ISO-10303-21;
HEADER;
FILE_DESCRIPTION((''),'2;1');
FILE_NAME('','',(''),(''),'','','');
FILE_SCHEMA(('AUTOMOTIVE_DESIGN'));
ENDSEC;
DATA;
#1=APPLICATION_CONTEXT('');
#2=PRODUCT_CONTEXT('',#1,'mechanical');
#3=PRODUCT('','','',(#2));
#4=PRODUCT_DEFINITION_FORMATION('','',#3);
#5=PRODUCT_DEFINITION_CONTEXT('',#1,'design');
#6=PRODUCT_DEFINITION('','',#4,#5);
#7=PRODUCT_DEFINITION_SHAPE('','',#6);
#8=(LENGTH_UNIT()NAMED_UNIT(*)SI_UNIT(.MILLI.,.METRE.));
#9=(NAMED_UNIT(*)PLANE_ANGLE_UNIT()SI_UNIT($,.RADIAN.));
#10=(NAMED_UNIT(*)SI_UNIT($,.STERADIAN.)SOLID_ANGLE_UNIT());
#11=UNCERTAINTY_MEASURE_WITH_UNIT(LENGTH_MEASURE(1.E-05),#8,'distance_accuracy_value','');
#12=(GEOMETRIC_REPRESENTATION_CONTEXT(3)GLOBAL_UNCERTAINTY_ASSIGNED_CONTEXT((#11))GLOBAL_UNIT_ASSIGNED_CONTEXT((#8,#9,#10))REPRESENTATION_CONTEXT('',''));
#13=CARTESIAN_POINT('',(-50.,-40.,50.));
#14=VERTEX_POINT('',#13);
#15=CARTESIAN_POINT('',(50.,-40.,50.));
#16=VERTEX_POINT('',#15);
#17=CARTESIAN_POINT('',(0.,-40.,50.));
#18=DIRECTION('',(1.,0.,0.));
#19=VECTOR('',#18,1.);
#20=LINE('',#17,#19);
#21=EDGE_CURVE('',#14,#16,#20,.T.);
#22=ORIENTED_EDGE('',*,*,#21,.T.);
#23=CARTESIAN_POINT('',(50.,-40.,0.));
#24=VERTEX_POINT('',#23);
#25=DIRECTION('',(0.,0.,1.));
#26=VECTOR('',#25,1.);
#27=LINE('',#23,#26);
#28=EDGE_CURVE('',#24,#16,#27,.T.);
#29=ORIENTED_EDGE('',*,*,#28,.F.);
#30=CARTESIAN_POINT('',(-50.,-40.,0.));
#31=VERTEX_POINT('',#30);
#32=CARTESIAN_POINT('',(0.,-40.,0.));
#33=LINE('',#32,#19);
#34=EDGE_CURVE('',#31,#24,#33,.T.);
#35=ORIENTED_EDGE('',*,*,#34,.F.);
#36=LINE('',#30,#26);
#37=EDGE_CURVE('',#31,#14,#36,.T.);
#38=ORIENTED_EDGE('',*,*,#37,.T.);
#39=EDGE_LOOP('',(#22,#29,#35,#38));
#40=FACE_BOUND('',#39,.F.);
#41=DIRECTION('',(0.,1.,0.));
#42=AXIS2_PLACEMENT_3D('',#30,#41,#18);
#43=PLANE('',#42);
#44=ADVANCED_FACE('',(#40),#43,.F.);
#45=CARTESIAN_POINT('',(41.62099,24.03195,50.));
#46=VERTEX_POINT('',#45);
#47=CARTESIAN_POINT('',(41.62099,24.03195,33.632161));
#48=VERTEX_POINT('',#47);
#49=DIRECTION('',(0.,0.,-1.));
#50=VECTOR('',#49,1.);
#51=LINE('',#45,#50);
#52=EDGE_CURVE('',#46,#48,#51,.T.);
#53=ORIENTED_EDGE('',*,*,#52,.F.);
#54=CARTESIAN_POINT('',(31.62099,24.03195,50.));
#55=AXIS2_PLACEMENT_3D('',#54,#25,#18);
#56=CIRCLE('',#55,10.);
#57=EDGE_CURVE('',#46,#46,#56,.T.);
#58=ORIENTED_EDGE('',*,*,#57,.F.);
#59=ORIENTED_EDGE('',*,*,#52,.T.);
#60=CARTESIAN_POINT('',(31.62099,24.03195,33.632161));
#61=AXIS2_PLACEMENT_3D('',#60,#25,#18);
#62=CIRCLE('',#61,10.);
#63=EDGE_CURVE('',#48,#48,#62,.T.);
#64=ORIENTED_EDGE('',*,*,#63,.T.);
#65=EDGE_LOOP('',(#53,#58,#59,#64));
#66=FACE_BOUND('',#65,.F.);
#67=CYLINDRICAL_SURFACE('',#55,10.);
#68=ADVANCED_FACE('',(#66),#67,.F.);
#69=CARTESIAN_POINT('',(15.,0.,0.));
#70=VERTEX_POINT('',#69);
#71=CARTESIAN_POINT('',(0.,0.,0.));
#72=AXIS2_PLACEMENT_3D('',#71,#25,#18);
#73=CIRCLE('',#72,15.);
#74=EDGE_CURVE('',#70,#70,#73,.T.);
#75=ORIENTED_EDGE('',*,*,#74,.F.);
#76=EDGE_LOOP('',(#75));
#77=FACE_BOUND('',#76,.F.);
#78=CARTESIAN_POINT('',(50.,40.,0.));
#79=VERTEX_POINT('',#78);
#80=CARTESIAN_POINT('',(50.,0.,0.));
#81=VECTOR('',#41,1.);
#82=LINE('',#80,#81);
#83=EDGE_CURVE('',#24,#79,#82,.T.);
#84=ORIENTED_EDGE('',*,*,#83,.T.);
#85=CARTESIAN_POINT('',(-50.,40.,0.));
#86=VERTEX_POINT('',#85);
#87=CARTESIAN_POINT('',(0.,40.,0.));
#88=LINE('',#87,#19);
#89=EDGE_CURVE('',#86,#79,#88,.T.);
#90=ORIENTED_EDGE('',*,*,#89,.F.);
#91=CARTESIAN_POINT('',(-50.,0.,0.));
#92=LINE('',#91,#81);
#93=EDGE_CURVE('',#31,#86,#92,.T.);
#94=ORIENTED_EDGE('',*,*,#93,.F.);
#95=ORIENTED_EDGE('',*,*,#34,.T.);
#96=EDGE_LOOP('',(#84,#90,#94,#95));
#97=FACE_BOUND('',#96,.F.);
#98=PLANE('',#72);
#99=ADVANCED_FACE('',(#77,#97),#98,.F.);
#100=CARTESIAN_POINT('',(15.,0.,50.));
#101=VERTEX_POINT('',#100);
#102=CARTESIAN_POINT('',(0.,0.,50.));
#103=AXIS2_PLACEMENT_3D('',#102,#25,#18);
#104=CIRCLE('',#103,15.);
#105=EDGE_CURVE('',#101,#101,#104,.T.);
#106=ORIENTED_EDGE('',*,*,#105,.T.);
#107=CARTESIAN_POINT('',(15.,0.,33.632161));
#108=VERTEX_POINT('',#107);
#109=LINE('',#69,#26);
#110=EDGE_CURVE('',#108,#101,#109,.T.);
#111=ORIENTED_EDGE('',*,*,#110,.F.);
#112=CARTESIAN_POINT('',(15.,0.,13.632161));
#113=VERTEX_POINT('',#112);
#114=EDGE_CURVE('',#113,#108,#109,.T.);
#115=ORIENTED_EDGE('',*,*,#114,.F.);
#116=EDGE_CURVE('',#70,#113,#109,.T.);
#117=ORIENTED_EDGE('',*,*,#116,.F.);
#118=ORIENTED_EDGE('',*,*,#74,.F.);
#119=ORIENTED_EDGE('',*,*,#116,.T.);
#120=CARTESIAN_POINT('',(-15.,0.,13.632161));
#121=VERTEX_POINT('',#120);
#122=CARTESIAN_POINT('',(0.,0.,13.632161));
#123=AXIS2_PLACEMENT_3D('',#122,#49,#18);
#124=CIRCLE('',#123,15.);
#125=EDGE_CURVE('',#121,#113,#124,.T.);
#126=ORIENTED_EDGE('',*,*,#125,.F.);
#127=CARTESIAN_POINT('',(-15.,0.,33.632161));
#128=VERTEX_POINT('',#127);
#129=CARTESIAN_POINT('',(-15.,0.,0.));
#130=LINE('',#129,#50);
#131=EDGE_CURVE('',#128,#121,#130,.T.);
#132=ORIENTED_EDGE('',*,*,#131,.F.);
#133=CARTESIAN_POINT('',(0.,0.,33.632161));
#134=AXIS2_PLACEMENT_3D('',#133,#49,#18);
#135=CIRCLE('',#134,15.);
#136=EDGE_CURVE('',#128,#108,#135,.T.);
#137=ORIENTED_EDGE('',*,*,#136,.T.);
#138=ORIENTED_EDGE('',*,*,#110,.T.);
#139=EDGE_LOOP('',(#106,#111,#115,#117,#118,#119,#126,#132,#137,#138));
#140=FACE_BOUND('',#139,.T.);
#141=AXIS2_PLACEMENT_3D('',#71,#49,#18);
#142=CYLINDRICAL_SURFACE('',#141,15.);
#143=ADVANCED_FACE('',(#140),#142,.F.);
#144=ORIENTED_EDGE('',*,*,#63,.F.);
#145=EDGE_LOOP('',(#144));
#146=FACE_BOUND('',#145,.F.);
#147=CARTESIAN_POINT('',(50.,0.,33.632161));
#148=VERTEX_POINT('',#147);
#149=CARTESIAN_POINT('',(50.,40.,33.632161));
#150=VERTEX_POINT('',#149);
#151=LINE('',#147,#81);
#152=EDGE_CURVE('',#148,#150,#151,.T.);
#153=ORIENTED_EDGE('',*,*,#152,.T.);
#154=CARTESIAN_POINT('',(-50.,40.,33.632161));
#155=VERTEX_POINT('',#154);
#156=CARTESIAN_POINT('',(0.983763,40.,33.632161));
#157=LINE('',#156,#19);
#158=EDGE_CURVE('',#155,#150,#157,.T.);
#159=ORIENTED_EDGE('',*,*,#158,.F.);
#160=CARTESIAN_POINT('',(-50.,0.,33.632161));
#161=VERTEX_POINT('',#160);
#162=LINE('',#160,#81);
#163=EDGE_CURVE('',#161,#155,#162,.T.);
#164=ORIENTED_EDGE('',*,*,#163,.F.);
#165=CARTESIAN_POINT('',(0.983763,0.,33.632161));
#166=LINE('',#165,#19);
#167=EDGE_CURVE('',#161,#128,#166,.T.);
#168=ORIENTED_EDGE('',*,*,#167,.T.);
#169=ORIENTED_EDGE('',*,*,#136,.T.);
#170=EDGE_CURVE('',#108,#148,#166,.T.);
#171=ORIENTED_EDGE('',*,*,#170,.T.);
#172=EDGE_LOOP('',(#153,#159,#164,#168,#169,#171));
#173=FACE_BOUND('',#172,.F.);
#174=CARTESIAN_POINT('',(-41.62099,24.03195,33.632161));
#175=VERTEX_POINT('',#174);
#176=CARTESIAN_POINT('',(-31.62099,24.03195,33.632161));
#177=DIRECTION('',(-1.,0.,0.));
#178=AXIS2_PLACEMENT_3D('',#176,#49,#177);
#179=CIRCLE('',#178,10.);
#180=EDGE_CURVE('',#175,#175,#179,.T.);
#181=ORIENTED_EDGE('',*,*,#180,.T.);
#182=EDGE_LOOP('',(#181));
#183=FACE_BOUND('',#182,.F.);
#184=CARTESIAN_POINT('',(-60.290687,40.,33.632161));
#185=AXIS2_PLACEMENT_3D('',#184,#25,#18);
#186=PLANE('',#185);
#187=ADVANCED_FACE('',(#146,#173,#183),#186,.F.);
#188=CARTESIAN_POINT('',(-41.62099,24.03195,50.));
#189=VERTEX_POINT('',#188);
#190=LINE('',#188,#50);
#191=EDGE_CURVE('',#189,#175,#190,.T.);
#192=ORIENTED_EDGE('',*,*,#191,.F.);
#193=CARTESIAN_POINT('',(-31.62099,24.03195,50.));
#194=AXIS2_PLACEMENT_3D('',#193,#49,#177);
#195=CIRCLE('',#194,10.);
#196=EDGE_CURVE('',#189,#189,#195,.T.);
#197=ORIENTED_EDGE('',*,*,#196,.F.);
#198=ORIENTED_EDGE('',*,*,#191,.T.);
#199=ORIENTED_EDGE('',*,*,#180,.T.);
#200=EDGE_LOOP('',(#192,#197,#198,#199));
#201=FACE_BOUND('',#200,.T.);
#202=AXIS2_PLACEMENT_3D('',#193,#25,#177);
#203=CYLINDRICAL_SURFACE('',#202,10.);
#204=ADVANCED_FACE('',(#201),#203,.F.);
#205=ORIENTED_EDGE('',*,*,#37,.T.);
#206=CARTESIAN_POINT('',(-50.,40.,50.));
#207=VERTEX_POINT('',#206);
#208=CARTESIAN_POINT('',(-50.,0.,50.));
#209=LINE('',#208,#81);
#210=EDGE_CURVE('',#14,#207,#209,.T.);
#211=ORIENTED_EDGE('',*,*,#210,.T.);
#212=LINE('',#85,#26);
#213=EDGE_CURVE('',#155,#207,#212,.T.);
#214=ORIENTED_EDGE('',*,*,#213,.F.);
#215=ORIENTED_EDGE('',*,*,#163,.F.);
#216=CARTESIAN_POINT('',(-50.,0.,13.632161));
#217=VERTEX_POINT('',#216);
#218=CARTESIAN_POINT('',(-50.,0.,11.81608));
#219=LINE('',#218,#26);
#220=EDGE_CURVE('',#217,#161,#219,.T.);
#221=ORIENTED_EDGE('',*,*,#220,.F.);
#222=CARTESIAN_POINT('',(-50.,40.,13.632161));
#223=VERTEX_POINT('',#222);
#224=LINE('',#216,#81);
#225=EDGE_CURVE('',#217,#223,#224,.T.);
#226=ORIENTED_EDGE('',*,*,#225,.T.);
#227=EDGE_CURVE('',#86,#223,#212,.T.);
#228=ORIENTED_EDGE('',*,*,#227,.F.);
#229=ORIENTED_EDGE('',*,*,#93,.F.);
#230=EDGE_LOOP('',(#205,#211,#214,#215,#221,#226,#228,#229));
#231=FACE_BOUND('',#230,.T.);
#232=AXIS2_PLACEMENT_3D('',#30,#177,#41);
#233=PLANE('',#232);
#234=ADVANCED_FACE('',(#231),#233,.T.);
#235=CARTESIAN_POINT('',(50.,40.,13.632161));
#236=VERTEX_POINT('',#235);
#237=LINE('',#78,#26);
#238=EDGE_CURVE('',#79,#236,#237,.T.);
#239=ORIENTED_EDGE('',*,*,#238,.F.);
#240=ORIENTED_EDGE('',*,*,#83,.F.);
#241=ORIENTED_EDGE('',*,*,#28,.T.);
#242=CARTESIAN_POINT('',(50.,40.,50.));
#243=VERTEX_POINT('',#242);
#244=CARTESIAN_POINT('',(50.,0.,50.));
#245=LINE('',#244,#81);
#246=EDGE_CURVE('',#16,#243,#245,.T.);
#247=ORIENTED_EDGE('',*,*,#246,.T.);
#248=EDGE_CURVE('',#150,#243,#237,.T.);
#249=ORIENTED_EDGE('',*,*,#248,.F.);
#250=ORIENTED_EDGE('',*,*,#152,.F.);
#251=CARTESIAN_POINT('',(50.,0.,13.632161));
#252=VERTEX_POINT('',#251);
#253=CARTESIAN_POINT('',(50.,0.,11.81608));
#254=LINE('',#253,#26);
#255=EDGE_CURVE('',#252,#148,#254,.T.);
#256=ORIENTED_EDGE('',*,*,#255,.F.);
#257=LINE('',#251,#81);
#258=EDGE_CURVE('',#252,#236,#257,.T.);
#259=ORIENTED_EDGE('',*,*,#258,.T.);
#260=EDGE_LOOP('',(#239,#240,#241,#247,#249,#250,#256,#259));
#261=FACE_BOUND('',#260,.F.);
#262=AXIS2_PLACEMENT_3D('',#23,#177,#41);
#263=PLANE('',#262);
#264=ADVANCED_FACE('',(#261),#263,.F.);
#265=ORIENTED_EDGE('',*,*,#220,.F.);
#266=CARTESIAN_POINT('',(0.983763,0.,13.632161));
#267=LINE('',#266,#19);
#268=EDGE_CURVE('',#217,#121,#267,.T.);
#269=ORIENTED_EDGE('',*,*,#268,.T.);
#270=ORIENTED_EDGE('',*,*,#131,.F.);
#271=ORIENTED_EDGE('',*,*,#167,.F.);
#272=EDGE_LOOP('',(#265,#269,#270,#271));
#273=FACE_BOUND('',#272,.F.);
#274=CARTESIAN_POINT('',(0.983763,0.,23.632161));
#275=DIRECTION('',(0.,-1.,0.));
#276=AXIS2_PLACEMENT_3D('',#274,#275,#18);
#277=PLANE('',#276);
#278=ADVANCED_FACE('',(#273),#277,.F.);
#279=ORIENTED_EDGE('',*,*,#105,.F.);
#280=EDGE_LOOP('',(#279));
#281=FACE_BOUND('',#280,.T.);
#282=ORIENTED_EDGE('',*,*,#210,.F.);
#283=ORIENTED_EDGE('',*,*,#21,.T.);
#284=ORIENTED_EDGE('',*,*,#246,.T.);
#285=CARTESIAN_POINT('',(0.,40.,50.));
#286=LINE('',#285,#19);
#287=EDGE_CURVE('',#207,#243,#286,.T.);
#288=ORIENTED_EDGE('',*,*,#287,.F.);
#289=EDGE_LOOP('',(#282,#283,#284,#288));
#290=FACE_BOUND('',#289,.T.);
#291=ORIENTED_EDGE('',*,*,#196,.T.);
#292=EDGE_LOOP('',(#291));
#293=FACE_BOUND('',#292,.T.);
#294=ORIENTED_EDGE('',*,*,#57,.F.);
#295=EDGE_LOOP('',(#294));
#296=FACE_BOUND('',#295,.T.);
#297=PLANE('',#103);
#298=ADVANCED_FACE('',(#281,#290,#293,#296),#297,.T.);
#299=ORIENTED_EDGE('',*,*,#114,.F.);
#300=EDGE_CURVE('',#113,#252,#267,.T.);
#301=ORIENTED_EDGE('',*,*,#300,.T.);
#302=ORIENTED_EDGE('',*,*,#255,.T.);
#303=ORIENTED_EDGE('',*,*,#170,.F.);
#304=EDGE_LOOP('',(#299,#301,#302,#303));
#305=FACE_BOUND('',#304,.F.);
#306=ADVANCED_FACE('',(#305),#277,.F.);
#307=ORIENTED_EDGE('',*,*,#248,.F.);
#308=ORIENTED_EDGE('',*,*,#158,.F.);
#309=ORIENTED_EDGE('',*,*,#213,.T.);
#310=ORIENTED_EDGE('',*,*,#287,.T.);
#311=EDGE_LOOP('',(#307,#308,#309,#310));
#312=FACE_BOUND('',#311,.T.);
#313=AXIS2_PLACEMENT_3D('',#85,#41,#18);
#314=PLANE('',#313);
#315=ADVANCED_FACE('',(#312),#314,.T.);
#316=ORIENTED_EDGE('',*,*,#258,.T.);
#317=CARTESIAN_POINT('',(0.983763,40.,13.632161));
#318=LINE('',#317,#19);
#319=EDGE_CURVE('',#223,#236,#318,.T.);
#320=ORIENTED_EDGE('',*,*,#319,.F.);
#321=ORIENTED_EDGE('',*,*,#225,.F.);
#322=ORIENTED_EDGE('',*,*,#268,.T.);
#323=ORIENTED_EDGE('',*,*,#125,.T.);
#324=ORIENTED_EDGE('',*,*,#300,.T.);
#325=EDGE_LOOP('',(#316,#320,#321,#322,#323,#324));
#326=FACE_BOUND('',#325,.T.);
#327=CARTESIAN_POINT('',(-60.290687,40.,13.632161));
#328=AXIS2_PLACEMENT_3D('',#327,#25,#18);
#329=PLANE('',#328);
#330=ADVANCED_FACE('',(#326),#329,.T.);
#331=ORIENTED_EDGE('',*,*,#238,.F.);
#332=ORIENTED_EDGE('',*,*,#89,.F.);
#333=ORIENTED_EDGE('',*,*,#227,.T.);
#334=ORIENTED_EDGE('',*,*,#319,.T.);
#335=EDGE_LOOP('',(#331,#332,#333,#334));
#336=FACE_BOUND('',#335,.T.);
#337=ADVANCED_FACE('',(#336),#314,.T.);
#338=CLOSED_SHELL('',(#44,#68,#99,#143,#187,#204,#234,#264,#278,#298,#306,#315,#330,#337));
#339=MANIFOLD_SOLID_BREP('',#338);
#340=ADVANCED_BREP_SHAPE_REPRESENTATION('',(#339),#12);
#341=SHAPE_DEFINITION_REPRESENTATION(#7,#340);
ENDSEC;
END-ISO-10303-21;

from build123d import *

# Parameters (mm, degrees)
F0_W     = 100
F0_H     = 80
F0_R     = 15
F1_DEPTH = 50
F3_W     = 122.5489005446
F3_H     = 20
F4_DEPTH = 40
F5_R     = 10
F6_DEPTH = 16.3678393885


# Not quite as in the source:
# - a pattern or mirror of a feature is missing from the dataset's text; its kind, count and spacing are read off the source's solid


with BuildPart() as f1:
    # F0 (on Top) → F1 (new body)
    with BuildSketch(Plane.XY):
        Rectangle(F0_W, F0_H)
        Circle(F0_R, mode=Mode.SUBTRACT)
    extrude(amount=F1_DEPTH)

    # F3 (on offset) → F4 (cut)
    with BuildSketch(Plane.XZ.offset(-40)):
        with Locations((0.9837634861, 23.6321606115)):
            Rectangle(F3_W, F3_H)
    extrude(amount=F4_DEPTH, mode=Mode.SUBTRACT)

    # F5 (on face) → F6 (cut, through all)
    with BuildSketch(Plane.XY.offset(50)):
        with Locations((31.620990485, 24.0319501609)):
            Circle(F5_R)
    f6 = extrude(amount=-F6_DEPTH, mode=Mode.SUBTRACT)

    # F6_copies: F6 across plane
    add(f6.mirror(Plane(origin=(0, 0, 0), x_dir=(0, 0, -1), z_dir=(-1, 0, 0))), mode=Mode.SUBTRACT)


solid = f1.part
